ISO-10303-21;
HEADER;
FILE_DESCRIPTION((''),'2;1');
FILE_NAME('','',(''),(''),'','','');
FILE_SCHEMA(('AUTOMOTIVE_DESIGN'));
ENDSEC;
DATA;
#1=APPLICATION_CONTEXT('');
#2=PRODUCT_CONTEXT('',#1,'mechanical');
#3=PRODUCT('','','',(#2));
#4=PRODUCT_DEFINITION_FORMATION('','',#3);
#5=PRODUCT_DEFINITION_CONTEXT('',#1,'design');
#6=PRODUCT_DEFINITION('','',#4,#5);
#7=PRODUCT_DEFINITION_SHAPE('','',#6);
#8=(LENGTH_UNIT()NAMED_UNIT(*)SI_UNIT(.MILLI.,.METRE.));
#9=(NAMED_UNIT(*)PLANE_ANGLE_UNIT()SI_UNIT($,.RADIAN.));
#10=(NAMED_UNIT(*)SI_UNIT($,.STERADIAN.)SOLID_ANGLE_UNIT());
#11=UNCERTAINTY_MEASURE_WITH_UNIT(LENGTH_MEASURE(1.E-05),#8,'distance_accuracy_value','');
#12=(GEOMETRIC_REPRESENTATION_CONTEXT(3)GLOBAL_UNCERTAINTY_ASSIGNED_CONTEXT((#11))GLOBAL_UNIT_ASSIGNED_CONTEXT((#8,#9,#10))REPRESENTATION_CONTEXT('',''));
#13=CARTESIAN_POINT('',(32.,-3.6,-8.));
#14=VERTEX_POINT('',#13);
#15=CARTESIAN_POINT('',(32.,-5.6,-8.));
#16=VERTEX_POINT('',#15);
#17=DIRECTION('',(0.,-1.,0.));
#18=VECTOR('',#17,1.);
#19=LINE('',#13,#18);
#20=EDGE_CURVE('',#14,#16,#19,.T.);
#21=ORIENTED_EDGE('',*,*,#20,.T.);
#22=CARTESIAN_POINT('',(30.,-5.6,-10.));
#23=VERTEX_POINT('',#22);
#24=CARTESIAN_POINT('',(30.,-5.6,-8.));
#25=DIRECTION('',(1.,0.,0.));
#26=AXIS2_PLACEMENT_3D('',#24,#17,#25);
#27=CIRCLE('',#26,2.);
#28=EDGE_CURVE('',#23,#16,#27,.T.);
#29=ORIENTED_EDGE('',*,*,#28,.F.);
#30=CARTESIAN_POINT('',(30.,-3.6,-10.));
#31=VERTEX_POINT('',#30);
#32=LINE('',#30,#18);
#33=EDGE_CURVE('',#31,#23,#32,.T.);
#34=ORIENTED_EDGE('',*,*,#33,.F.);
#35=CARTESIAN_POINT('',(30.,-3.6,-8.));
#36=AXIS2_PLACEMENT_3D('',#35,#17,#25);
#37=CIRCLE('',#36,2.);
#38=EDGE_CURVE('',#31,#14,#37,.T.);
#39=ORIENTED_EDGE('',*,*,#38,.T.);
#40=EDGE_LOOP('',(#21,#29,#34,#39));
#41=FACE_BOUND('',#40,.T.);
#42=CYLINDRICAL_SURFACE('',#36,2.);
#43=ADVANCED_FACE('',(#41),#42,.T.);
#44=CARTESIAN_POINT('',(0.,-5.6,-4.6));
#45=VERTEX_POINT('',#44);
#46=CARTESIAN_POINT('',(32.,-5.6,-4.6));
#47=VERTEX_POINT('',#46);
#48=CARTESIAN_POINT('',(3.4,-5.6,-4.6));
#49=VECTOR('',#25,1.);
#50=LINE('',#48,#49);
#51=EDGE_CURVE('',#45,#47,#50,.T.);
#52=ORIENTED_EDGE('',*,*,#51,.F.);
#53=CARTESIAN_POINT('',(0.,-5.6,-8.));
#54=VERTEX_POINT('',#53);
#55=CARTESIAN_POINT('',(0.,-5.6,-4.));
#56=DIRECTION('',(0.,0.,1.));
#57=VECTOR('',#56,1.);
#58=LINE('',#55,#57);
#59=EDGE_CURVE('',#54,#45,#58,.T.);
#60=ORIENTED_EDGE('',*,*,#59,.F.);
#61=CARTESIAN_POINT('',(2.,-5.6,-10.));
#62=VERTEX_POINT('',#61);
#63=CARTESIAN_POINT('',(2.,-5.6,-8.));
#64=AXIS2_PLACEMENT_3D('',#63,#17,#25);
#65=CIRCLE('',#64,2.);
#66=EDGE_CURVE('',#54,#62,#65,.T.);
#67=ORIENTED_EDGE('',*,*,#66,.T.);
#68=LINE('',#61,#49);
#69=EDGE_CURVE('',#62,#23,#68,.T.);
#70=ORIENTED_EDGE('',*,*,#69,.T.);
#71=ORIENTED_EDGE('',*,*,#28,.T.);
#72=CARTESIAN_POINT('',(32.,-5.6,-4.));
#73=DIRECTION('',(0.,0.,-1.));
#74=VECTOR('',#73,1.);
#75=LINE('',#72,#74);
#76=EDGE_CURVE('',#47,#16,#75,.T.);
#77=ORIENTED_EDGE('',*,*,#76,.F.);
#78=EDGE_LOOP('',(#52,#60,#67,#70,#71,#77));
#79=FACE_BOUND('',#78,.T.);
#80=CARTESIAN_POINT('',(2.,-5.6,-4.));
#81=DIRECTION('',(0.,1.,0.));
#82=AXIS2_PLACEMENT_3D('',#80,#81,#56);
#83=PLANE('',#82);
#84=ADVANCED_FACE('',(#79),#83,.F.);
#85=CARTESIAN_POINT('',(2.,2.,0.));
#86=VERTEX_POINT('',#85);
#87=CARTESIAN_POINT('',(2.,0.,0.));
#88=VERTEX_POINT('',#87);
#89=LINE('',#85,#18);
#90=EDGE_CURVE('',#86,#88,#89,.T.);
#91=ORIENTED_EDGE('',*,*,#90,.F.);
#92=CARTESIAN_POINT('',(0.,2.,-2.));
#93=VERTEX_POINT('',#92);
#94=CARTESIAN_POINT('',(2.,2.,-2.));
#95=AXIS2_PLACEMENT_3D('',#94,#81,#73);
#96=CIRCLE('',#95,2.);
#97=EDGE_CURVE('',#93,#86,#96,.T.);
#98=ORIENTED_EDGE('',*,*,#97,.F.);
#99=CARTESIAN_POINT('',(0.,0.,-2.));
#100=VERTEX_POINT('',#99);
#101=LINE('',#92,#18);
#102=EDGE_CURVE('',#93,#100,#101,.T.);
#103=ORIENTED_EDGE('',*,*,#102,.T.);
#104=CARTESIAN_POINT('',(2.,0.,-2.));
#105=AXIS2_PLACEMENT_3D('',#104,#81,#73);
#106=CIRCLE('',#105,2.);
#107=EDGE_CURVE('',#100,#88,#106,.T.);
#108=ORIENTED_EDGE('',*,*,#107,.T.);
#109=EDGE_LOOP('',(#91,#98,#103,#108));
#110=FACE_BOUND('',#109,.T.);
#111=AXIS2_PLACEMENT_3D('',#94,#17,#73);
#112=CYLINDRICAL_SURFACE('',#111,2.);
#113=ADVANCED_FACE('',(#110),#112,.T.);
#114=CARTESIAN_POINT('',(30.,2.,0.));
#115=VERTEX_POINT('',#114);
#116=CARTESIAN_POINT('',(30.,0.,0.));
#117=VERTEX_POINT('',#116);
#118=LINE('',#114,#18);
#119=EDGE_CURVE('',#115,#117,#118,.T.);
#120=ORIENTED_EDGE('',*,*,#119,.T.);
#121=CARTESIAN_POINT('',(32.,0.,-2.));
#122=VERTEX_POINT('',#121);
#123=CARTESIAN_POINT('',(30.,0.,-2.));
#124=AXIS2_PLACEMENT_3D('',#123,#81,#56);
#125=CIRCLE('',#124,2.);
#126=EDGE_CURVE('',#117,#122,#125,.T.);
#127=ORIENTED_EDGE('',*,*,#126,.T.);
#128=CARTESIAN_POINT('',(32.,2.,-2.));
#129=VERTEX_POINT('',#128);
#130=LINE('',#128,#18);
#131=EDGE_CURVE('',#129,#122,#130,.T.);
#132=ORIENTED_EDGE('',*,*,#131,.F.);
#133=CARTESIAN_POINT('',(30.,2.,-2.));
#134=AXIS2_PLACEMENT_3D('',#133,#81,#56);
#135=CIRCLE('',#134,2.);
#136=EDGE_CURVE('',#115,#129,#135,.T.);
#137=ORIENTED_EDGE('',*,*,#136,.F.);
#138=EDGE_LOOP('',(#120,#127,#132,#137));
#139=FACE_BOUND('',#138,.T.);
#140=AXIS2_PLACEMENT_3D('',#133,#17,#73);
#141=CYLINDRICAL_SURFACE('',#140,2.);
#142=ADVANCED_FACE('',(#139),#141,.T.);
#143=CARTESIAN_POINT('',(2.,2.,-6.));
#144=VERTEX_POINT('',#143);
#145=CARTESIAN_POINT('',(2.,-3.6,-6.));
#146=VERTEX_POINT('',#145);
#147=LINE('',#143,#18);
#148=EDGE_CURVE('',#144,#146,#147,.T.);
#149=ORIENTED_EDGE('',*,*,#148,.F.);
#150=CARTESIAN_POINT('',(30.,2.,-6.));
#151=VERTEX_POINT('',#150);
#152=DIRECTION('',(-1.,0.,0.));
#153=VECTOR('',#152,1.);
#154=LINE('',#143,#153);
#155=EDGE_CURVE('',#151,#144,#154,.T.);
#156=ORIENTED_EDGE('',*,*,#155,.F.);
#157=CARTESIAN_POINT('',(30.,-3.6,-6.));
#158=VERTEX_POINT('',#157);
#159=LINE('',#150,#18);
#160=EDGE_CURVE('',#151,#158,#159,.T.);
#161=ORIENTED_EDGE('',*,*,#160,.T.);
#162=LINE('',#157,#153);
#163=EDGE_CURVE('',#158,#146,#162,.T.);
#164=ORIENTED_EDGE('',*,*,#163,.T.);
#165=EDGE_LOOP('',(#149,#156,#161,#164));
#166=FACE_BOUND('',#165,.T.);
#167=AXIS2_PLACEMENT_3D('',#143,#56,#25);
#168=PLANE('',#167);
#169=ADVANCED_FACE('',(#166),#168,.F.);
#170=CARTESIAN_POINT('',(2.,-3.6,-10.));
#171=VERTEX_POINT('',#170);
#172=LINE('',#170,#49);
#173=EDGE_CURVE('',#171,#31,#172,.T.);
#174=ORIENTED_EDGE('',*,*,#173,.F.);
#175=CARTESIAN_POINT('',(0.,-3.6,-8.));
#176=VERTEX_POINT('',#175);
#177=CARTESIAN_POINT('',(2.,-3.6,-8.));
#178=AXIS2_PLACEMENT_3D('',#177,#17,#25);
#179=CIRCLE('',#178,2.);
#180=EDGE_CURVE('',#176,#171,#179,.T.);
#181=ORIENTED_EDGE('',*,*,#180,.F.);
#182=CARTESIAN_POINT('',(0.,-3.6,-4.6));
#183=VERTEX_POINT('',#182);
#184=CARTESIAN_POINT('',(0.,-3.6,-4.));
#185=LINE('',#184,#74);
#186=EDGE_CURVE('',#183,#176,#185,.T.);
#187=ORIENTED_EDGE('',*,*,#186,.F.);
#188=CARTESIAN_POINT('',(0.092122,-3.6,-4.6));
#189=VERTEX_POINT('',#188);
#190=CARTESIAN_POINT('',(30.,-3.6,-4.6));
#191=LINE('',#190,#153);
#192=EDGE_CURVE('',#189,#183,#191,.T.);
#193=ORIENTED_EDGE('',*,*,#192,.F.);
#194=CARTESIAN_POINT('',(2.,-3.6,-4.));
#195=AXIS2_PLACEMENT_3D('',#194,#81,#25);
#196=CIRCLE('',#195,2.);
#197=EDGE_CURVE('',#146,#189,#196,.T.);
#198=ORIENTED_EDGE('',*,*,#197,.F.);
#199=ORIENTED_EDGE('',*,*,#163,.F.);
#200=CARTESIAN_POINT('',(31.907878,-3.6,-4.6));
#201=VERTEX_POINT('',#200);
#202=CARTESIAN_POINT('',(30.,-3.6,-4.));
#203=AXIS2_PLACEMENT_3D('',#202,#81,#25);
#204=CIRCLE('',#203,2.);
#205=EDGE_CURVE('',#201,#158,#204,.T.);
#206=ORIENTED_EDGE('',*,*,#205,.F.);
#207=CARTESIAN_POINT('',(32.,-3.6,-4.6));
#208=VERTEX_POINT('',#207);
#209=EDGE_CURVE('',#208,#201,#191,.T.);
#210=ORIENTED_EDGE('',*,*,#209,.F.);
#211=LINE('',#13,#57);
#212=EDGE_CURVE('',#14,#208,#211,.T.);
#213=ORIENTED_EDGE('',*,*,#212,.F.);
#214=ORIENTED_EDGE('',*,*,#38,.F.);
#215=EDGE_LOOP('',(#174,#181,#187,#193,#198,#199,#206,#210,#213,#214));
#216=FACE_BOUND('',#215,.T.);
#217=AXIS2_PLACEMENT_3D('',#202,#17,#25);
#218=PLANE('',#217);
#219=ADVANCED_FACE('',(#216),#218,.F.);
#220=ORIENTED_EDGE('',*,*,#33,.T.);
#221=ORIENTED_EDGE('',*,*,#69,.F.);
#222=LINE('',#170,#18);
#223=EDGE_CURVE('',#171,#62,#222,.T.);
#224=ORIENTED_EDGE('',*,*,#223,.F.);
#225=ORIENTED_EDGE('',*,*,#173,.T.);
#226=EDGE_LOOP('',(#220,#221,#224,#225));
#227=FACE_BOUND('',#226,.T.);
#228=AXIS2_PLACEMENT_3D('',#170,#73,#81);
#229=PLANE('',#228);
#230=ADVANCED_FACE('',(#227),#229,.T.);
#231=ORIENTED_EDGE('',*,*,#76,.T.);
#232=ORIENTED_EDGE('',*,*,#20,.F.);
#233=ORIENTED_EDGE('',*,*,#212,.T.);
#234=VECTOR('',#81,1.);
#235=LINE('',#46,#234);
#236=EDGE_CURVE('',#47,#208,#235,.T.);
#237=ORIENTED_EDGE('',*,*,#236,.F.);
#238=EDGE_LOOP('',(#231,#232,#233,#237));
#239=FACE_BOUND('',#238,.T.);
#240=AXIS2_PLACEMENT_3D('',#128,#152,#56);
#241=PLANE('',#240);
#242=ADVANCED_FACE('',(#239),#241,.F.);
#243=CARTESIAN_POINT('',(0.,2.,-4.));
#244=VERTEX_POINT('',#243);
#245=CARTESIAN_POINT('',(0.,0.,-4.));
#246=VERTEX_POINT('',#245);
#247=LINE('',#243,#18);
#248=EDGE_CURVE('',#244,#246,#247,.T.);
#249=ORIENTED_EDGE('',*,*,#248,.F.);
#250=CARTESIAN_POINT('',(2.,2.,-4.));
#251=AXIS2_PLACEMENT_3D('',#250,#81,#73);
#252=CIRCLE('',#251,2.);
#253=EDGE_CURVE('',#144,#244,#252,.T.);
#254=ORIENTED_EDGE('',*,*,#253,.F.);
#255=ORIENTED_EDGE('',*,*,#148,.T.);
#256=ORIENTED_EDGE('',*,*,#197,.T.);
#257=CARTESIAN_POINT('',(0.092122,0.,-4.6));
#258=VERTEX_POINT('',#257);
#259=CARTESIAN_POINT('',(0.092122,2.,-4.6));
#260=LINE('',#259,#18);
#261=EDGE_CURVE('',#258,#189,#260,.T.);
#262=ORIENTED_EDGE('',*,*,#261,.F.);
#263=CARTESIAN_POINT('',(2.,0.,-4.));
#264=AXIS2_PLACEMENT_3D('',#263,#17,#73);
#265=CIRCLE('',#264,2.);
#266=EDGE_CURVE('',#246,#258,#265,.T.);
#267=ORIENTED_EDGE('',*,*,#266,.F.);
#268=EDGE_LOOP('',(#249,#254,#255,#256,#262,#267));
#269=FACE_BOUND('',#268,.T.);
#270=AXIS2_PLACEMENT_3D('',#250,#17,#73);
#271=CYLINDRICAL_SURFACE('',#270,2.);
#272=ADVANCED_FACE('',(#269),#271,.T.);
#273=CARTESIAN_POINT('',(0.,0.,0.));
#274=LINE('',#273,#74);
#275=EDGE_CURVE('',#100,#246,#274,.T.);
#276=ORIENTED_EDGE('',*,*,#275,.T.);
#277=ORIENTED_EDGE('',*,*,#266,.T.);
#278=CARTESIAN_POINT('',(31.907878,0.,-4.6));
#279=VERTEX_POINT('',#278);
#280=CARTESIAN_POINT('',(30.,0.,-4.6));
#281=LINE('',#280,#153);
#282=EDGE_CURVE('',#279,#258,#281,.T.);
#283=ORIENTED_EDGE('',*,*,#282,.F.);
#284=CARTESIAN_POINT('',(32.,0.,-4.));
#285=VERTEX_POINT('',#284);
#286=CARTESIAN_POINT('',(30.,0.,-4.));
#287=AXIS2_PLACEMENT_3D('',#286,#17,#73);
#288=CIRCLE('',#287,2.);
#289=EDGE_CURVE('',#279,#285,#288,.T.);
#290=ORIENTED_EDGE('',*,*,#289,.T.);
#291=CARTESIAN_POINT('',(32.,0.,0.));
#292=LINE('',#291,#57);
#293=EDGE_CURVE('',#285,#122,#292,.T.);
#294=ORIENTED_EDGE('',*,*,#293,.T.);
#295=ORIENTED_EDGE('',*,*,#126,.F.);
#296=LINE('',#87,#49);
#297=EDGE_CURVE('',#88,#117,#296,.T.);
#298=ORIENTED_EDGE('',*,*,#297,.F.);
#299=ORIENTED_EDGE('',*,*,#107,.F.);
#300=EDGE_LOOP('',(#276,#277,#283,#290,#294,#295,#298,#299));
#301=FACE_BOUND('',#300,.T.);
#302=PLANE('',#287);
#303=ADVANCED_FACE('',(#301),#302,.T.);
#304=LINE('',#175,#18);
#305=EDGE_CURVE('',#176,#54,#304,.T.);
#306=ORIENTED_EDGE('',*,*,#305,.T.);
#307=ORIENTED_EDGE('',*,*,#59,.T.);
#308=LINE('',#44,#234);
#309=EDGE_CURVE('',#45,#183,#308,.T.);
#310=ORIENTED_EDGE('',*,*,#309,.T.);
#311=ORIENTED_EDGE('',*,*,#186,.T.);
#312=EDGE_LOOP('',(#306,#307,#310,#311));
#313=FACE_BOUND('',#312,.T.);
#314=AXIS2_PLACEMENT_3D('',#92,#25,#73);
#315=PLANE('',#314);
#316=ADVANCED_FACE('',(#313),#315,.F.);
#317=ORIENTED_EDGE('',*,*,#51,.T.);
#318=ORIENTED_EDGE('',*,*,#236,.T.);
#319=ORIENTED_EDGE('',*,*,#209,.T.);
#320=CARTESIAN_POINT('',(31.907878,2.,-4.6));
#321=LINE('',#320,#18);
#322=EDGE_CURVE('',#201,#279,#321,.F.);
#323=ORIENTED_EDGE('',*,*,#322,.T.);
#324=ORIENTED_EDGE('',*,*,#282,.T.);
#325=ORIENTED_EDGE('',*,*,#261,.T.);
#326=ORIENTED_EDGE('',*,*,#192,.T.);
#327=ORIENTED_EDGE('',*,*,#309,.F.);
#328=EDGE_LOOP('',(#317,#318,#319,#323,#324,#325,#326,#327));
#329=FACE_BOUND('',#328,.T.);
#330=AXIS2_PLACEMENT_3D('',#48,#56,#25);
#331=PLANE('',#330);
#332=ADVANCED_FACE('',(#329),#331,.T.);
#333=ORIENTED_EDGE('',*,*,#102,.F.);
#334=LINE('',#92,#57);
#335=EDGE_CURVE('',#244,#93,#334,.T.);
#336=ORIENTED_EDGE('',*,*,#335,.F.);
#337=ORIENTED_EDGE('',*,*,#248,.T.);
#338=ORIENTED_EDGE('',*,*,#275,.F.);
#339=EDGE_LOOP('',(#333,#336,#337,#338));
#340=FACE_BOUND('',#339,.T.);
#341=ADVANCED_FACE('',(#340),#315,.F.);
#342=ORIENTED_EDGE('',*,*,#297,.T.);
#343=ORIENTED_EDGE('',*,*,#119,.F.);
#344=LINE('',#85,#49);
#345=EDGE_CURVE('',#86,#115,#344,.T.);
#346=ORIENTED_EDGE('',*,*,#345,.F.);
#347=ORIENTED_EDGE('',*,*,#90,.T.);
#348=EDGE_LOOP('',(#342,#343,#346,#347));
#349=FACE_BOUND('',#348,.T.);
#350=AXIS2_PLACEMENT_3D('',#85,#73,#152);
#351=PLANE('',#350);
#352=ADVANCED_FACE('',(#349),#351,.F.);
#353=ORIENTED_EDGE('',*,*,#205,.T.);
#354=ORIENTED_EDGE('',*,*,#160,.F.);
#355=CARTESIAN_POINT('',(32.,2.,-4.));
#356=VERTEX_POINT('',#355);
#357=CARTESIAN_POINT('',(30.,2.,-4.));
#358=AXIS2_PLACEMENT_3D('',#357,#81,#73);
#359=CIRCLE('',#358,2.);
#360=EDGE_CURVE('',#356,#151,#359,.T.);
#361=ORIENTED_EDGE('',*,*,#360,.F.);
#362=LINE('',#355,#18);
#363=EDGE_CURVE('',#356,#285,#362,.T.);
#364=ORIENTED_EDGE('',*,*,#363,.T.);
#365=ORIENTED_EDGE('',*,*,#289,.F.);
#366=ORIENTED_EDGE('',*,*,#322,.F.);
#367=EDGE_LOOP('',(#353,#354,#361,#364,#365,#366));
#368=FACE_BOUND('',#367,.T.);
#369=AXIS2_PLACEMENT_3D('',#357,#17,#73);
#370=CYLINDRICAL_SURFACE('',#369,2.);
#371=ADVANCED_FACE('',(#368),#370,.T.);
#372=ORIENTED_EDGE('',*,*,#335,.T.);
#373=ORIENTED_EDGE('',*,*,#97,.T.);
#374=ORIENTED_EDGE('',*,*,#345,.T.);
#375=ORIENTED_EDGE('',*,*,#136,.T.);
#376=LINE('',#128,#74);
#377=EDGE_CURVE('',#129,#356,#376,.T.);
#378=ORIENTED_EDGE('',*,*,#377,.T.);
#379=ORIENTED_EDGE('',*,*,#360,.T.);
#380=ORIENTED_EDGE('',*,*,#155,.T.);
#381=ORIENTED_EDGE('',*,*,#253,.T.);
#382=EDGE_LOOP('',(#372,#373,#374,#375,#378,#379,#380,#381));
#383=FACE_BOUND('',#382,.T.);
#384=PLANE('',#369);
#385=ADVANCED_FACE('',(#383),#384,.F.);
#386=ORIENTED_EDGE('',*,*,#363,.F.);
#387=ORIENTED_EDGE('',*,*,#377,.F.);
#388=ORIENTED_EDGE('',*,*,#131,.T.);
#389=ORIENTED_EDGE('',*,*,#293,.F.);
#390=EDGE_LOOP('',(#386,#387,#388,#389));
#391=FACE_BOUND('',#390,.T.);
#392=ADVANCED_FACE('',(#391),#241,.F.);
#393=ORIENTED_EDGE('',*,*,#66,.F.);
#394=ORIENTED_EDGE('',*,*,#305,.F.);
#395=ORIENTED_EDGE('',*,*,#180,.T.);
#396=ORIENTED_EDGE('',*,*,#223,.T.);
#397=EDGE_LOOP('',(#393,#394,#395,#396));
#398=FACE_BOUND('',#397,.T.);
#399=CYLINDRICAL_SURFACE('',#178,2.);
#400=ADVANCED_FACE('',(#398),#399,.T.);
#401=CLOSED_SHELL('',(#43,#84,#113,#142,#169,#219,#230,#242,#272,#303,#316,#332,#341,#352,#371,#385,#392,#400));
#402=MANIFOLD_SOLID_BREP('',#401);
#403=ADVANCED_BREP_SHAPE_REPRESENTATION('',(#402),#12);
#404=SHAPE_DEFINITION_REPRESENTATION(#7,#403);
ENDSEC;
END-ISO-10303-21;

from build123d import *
from build123d.topology import SkipClean

# Parameters (mm, degrees)
BOSS_EXTRUDE1_DEPTH = 2
BOSS_EXTRUDE2_START = -7.6
BOSS_EXTRUDE2_DEPTH = 7.6
BOSS_EXTRUDE3_DEPTH = 2
SKETCH5_W           = 32
SKETCH5_H           = 4.6
CUT_EXTRUDE1_DEPTH  = 34.990586932


with BuildPart() as part:
    # Sketch1 → Boss-Extrude1 (new body)
    with BuildSketch(Plane(origin=(0, 0, 0), x_dir=(1, 0, 0), z_dir=(0, 1, 0))):
        with BuildLine():
            Line((2, 0), (30, 0))
            ThreePointArc((30, 0), (31.414213562, 0.585786438), (32, 2))
            Line((32, 2), (32, 4))
            ThreePointArc((32, 4), (31.414213562, 5.414213562), (30, 6))
            Line((30, 6), (2, 6))
            ThreePointArc((2, 6), (0.585786438, 5.414213562), (0, 4))
            Line((0, 4), (0, 2))
            ThreePointArc((0, 2), (0.585786438, 0.585786438), (2, 0))
        make_face()
    extrude(amount=BOSS_EXTRUDE1_DEPTH)

    # Sketch2 → Boss-Extrude2 (add)
    with SkipClean():  # the faces are left unmerged after this step: merging them gives an invalid solid
        with BuildSketch(Plane(origin=(0, 2, 0), x_dir=(1, 0, 0), z_dir=(0, 1, 0)).offset(BOSS_EXTRUDE2_START)):
            with BuildLine():
                Line((32, 4), (32, 2))
                ThreePointArc((32, 2), (31.449137675, 0.621595125), (30.1, 0.002501564))
                Line((30.1, 0.002501564), (30.1, 3.1))
                ThreePointArc((30.1, 3.1), (29.660660172, 4.160660172), (28.6, 4.6))
                Line((28.6, 4.6), (3.4, 4.6))
                ThreePointArc((3.4, 4.6), (2.339339828, 4.160660172), (1.9, 3.1))
                Line((1.9, 3.1), (1.9, 0.002501564))
                ThreePointArc((1.9, 0.002501564), (0.550862325, 0.621595125), (0, 2))
                Line((0, 2), (0, 4))
                ThreePointArc((0, 4), (0.585786438, 5.414213562), (2, 6))
                Line((2, 6), (30, 6))
                ThreePointArc((30, 6), (31.414213562, 5.414213562), (32, 4))
            make_face()
        extrude(amount=BOSS_EXTRUDE2_DEPTH)
    add(part.part.scale(1), mode=Mode.REPLACE)  # the faces are merged on a copy

    # Sketch4 → Boss-Extrude3 (add)
    with BuildSketch(Plane.XZ.offset(5.6)):
        with BuildLine():
            Line((30, -6), (2, -6))
            ThreePointArc((2, -6), (0.585786438, -5.414213562), (0, -4))
            Line((0, -4), (0, -8))
            ThreePointArc((0, -8), (0.585786438, -9.414213562), (2, -10))
            Line((2, -10), (30, -10))
            ThreePointArc((30, -10), (31.414213562, -9.414213562), (32, -8))
            Line((32, -8), (32, -4))
            ThreePointArc((32, -4), (31.414213562, -5.414213562), (30, -6))
        make_face()
    extrude(amount=-BOSS_EXTRUDE3_DEPTH)

    # Sketch5 → Cut-Extrude1 (cut, through all)
    with BuildSketch(Plane.XZ):
        with Locations((16, -2.3)):
            Rectangle(SKETCH5_W, SKETCH5_H)
    extrude(amount=CUT_EXTRUDE1_DEPTH, mode=Mode.SUBTRACT)


solid = part.part
